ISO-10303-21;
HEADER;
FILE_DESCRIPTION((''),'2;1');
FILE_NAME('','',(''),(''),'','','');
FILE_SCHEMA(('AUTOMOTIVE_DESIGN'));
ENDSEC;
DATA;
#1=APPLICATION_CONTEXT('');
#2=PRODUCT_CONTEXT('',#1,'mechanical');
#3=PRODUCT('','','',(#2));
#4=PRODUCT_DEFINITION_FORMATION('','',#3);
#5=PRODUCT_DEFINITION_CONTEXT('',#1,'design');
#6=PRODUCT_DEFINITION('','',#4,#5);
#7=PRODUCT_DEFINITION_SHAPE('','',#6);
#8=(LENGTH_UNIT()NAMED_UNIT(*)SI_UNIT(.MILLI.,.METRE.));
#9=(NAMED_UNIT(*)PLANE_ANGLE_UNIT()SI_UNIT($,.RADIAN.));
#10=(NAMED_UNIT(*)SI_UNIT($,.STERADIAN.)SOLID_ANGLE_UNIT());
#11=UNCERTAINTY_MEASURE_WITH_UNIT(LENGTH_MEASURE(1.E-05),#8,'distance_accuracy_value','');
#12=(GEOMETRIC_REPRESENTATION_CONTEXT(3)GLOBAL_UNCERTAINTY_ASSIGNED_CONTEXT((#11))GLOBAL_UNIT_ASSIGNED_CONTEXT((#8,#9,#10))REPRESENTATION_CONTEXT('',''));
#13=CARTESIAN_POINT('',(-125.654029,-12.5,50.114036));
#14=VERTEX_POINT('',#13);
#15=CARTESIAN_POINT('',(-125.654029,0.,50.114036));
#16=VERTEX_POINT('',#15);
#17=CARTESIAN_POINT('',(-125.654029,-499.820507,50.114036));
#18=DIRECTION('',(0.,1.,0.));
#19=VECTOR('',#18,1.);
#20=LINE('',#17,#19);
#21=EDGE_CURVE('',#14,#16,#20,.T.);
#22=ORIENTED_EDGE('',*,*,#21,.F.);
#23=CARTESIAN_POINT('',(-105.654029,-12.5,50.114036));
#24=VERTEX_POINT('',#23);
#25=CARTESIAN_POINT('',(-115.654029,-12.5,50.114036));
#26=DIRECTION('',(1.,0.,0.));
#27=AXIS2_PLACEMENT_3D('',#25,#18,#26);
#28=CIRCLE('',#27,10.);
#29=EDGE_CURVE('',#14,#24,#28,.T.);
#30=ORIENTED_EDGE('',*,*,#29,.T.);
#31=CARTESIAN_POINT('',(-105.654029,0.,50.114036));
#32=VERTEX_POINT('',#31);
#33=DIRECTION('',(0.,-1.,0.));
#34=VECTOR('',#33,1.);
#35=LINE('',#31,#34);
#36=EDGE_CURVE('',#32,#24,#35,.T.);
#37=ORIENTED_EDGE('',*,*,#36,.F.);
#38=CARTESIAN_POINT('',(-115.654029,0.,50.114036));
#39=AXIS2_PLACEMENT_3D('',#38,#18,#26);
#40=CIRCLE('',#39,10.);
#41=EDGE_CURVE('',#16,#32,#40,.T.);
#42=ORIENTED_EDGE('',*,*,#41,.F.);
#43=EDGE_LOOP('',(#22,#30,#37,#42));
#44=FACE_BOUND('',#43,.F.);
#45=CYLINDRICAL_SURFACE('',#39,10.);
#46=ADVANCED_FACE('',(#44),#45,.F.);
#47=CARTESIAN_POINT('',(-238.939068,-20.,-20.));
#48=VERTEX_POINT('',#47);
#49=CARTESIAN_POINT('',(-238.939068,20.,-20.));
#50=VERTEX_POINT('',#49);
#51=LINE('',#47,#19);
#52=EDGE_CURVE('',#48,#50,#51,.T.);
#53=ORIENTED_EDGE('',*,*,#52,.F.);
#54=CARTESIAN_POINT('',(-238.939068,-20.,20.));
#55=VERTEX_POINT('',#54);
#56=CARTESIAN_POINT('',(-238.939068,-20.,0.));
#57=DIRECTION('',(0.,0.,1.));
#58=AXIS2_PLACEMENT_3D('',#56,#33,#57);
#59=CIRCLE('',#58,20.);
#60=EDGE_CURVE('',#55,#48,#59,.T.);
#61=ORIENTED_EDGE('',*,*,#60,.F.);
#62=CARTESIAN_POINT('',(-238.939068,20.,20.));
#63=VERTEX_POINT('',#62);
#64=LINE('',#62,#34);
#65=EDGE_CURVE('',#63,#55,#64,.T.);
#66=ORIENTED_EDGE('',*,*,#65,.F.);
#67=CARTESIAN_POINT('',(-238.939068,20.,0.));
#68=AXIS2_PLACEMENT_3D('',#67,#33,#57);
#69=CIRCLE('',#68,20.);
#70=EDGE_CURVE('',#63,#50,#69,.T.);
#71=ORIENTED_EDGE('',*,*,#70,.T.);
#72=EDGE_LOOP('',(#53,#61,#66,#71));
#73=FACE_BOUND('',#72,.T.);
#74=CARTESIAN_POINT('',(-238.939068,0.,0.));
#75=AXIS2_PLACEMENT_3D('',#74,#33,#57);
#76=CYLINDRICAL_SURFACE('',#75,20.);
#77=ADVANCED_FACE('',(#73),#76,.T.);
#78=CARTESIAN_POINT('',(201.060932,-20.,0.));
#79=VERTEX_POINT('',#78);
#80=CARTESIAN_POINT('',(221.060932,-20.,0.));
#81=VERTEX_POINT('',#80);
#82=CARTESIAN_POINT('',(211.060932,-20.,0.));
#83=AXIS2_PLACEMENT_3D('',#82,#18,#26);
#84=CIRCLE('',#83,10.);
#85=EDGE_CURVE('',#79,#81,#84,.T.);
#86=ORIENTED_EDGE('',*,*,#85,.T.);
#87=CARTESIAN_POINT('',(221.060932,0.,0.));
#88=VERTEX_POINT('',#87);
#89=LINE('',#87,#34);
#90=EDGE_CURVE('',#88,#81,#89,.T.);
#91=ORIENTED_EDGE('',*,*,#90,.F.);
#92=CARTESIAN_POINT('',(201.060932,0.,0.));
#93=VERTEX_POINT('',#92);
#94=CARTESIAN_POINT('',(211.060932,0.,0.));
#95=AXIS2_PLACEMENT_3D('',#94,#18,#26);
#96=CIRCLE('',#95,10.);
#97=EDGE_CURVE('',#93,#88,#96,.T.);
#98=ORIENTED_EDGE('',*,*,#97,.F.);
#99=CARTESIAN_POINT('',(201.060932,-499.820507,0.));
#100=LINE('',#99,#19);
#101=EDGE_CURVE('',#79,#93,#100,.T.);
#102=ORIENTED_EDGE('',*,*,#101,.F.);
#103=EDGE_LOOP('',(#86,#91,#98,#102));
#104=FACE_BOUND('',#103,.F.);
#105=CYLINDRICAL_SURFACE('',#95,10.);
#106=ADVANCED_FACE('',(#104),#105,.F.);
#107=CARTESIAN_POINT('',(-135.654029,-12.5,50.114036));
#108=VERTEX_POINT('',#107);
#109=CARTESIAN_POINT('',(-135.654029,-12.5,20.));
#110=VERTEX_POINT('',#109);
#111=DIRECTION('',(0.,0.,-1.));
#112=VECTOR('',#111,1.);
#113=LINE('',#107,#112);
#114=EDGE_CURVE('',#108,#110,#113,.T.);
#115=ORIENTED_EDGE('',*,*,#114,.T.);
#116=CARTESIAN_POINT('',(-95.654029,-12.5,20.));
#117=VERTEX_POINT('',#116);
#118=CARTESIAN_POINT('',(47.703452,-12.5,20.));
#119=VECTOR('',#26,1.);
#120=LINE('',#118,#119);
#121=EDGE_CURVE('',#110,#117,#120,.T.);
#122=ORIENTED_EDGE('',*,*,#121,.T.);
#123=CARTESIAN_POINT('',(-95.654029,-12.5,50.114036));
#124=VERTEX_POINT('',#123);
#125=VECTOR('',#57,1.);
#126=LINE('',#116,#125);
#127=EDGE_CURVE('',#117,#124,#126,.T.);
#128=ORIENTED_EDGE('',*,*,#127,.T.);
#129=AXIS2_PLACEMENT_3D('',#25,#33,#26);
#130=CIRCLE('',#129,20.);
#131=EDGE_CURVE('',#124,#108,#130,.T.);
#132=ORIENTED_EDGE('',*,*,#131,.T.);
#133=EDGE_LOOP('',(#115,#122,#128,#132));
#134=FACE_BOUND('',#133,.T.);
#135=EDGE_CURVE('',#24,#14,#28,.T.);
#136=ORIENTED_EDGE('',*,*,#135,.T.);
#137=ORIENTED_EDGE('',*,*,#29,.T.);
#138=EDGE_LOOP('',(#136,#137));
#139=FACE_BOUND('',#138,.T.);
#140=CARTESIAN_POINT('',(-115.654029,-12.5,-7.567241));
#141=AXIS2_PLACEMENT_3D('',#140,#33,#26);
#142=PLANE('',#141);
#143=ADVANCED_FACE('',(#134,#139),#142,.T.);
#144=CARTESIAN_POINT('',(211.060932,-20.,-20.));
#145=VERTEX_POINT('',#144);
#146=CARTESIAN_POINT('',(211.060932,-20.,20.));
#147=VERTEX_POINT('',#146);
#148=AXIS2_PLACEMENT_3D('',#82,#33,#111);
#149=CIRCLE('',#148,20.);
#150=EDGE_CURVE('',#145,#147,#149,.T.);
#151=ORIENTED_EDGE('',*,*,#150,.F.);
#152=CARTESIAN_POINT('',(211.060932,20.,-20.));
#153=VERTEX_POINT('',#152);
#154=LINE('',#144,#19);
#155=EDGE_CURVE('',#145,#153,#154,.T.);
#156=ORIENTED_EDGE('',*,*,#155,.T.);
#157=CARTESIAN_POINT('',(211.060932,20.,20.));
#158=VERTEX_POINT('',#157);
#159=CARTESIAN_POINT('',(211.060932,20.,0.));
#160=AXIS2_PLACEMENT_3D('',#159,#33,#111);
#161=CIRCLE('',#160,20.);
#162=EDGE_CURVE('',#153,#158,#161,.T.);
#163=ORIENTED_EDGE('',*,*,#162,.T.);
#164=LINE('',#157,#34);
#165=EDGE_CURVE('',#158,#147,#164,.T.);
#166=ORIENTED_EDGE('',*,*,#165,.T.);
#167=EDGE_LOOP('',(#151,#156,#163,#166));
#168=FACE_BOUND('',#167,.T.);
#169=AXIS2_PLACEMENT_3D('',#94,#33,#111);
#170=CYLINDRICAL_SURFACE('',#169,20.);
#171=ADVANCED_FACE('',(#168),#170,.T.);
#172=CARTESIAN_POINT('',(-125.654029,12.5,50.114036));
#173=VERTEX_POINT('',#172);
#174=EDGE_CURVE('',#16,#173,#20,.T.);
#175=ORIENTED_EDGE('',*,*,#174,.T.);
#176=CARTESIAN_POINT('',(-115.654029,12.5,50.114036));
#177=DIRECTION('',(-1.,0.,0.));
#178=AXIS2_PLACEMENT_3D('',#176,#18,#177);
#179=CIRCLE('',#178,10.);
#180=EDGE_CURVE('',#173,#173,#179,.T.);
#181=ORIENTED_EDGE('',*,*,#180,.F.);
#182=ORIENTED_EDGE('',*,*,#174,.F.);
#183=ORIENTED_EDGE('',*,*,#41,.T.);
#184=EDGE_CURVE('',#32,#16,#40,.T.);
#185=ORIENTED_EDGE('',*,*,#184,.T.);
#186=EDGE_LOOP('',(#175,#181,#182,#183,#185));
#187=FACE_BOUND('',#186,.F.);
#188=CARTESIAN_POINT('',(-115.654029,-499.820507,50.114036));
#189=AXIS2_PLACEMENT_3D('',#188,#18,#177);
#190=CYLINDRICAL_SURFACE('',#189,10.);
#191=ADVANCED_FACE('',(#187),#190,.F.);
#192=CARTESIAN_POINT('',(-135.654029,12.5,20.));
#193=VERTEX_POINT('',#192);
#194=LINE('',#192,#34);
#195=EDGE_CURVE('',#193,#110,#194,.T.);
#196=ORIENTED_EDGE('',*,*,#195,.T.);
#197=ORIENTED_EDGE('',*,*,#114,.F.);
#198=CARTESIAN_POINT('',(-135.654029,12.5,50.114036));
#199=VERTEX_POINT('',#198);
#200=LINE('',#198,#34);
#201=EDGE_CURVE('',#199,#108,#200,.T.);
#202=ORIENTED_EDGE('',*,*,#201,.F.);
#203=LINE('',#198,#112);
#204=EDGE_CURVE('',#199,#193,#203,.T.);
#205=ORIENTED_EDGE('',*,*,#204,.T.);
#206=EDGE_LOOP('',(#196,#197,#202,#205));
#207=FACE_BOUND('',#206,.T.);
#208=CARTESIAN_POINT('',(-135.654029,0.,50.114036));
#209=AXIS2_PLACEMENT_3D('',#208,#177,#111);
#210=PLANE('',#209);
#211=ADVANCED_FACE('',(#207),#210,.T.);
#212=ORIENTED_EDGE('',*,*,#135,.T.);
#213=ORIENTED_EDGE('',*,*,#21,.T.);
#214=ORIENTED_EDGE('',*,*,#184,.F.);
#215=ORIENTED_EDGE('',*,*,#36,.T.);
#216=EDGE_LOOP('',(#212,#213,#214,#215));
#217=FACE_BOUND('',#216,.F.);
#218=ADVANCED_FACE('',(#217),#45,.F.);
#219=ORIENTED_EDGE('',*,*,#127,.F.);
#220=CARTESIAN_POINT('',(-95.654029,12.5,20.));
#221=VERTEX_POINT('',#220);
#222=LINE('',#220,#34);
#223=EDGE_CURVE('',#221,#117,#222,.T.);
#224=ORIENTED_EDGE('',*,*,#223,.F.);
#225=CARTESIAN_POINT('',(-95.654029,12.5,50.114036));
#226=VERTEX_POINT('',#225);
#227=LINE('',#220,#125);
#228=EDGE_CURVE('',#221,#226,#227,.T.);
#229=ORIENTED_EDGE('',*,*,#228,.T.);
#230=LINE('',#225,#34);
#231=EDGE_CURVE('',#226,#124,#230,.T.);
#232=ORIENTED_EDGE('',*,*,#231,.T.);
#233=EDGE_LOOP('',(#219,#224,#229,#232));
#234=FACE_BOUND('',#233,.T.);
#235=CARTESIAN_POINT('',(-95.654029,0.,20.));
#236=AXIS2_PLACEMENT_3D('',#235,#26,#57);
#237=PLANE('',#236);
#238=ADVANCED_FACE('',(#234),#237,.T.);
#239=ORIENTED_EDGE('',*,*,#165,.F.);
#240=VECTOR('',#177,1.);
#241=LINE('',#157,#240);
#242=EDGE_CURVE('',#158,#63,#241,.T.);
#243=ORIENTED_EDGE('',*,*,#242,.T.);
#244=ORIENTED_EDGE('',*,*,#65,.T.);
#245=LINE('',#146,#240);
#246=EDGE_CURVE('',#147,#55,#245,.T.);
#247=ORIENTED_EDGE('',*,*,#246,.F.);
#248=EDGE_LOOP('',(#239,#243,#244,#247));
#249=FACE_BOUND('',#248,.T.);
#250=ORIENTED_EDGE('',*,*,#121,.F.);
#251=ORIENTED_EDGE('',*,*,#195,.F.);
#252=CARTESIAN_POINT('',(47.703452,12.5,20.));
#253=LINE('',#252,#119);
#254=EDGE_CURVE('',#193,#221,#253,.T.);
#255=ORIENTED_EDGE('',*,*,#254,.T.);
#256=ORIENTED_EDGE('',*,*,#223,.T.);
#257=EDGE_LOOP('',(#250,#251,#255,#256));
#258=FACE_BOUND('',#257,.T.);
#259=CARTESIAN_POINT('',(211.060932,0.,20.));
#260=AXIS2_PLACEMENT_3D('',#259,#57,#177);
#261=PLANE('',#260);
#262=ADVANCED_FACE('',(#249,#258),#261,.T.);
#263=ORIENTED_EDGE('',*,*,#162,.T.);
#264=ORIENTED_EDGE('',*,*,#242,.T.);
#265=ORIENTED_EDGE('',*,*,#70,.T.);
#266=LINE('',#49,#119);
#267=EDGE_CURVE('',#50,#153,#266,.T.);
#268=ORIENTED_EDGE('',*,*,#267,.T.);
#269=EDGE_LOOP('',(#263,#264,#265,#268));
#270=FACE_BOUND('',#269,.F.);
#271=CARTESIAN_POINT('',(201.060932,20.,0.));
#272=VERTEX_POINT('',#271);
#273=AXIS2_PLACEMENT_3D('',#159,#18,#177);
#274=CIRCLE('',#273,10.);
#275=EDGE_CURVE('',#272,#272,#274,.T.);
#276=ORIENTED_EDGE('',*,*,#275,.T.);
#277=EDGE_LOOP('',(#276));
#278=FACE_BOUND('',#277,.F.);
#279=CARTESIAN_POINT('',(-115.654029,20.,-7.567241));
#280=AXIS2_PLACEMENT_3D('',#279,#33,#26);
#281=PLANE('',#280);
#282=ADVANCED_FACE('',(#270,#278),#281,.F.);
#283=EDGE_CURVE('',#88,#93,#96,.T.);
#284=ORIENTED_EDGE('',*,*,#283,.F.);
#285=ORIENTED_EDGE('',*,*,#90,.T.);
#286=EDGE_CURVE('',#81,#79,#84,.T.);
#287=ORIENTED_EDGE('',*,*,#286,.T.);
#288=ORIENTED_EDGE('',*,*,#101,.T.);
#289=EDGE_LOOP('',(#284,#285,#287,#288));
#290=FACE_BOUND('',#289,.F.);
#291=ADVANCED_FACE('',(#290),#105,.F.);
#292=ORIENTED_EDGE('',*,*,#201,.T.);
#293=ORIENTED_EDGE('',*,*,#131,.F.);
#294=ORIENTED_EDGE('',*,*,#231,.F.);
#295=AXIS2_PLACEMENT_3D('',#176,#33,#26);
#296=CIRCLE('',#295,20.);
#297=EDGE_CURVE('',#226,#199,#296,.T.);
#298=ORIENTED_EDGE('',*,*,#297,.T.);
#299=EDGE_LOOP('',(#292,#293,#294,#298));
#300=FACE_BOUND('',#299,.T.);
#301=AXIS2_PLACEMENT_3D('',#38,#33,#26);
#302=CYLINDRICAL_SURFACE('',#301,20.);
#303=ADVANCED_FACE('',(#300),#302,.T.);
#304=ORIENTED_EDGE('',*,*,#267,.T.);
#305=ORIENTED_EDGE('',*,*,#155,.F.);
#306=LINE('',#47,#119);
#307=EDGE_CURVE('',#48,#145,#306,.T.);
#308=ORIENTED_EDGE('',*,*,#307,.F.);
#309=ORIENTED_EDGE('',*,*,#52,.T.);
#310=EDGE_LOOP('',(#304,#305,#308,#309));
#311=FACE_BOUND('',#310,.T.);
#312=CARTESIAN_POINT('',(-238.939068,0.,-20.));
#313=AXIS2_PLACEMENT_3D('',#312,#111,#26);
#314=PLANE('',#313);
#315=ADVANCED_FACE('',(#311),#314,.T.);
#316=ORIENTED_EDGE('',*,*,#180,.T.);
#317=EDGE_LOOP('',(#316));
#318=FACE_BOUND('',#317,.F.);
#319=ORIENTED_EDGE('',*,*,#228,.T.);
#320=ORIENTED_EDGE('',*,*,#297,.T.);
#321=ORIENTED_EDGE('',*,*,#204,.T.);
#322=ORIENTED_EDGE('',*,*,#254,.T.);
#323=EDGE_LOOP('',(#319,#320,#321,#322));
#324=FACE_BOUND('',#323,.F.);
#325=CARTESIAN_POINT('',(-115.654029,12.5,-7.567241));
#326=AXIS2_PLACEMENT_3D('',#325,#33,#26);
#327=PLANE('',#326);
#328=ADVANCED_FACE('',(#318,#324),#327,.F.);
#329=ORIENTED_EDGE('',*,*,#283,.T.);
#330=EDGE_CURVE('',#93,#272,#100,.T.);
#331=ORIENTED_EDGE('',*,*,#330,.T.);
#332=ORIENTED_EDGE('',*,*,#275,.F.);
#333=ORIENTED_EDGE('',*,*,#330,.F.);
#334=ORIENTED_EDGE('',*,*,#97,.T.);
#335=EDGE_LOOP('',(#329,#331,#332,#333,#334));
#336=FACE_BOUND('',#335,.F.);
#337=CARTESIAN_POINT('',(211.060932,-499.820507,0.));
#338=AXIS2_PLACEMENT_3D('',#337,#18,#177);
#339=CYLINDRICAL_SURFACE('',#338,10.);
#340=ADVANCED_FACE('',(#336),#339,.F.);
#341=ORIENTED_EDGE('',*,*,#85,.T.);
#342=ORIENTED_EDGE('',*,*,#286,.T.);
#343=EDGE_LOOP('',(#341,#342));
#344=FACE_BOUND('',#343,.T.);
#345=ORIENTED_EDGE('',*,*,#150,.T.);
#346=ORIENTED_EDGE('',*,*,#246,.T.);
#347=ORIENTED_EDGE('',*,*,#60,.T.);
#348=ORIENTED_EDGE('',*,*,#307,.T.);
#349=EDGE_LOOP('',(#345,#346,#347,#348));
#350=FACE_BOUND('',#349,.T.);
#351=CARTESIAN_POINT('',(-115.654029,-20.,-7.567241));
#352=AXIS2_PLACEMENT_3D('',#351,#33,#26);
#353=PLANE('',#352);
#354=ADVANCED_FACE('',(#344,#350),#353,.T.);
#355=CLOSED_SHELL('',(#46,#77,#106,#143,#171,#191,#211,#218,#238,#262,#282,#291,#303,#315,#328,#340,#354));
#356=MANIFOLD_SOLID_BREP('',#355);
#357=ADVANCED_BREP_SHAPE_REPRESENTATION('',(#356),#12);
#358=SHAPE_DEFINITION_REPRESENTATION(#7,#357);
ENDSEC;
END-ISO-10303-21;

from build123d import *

# Parameters (mm, degrees)
F0_W     = 20
F0_H     = 20
F1_DEPTH = 20
F2_DEPTH = 12.5
F3_D     = 20
F3_DEPTH = 20.001
F4_D     = 20


with BuildPart() as f1:
    # F0 (on Front) → F1 (new body, symmetric)
    with BuildSketch(Plane.XZ):
        with BuildLine():
            ThreePointArc((-115.6540289521, -20), (-101.5118933284, -14.1421356237), (-95.6540289521, 0))
            Line((-95.6540289521, 0), (-115.6540289521, 0))
            Line((-115.6540289521, 0), (-135.6540289521, 0))
            ThreePointArc((-135.6540289521, 0), (-129.7961645759, -14.1421356237), (-115.6540289521, -20))
        make_face()
        with BuildLine():
            Line((-95.6540289521, 20), (-95.6540289521, 0))
            ThreePointArc((-95.6540289521, 0), (-101.5118933284, -14.1421356237), (-115.6540289521, -20))
            Line((-115.6540289521, -20), (211.0609319716, -20))
            ThreePointArc((211.0609319716, -20), (231.0609319716, 0), (211.0609319716, 20))
            Line((211.0609319716, 20), (-95.6540289521, 20))
        make_face()
        with Locations((-105.6540289521, 10)):
            Rectangle(F0_W, F0_H)
        with Locations((-125.6540289521, 10)):
            Rectangle(F0_W, F0_H)
        with BuildLine():
            Line((-238.9390680284, -20), (-115.6540289521, -20))
            ThreePointArc((-115.6540289521, -20), (-129.7961645759, -14.1421356237), (-135.6540289521, 0))
            Line((-135.6540289521, 0), (-135.6540289521, 20))
            Line((-135.6540289521, 20), (-238.9390680284, 20))
            ThreePointArc((-238.9390680284, 20), (-258.9390680284, 0), (-238.9390680284, -20))
        make_face()
    extrude(amount=F1_DEPTH, both=True)

    # F0 (on Front) → F2 (join, symmetric)
    with BuildSketch(Plane.XZ):
        with BuildLine():
            ThreePointArc((-115.6540289521, -20), (-101.5118933284, -14.1421356237), (-95.6540289521, 0))
            Line((-95.6540289521, 0), (-115.6540289521, 0))
            Line((-115.6540289521, 0), (-135.6540289521, 0))
            ThreePointArc((-135.6540289521, 0), (-129.7961645759, -14.1421356237), (-115.6540289521, -20))
        make_face()
        with BuildLine():
            Line((-95.6540289521, 20), (-95.6540289521, 0))
            ThreePointArc((-95.6540289521, 0), (-101.5118933284, -14.1421356237), (-115.6540289521, -20))
            Line((-115.6540289521, -20), (211.0609319716, -20))
            ThreePointArc((211.0609319716, -20), (231.0609319716, 0), (211.0609319716, 20))
            Line((211.0609319716, 20), (-95.6540289521, 20))
        make_face()
        with Locations((-105.6540289521, 10)):
            Rectangle(F0_W, F0_H)
        with Locations((-125.6540289521, 10)):
            Rectangle(F0_W, F0_H)
        with BuildLine():
            Line((-238.9390680284, -20), (-115.6540289521, -20))
            ThreePointArc((-115.6540289521, -20), (-129.7961645759, -14.1421356237), (-135.6540289521, 0))
            Line((-135.6540289521, 0), (-135.6540289521, 20))
            Line((-135.6540289521, 20), (-238.9390680284, 20))
            ThreePointArc((-238.9390680284, 20), (-258.9390680284, 0), (-238.9390680284, -20))
        make_face()
        with BuildLine():
            Line((-115.6540289521, 20), (-95.6540289521, 20))
            Line((-95.6540289521, 20), (-95.6540289521, 50.1140356064))
            ThreePointArc((-95.6540289521, 50.1140356064), (-115.6540289521, 70.1140356064), (-135.6540289521, 50.1140356064))
            Line((-135.6540289521, 50.1140356064), (-135.6540289521, 20))
            Line((-135.6540289521, 20), (-115.6540289521, 20))
        make_face()
    extrude(amount=F2_DEPTH, both=True)

    # F3 (through all, one way)
    with BuildSketch(Plane(origin=(0, 0, 0), x_dir=(1, 0, 0), z_dir=(0, 1, 0))):
        with Locations((211.0609319716, 0), (-115.6540289521, -50.1140356064)):
            Circle(F3_D / 2)
    extrude(amount=-F3_DEPTH, mode=Mode.SUBTRACT)

    # F4 (through all)
    with Locations(Plane.XZ):
        with Locations((-115.6540289521, 50.1140356064), (211.0609319716, 0)):
            Hole(F4_D / 2)


solid = f1.part
